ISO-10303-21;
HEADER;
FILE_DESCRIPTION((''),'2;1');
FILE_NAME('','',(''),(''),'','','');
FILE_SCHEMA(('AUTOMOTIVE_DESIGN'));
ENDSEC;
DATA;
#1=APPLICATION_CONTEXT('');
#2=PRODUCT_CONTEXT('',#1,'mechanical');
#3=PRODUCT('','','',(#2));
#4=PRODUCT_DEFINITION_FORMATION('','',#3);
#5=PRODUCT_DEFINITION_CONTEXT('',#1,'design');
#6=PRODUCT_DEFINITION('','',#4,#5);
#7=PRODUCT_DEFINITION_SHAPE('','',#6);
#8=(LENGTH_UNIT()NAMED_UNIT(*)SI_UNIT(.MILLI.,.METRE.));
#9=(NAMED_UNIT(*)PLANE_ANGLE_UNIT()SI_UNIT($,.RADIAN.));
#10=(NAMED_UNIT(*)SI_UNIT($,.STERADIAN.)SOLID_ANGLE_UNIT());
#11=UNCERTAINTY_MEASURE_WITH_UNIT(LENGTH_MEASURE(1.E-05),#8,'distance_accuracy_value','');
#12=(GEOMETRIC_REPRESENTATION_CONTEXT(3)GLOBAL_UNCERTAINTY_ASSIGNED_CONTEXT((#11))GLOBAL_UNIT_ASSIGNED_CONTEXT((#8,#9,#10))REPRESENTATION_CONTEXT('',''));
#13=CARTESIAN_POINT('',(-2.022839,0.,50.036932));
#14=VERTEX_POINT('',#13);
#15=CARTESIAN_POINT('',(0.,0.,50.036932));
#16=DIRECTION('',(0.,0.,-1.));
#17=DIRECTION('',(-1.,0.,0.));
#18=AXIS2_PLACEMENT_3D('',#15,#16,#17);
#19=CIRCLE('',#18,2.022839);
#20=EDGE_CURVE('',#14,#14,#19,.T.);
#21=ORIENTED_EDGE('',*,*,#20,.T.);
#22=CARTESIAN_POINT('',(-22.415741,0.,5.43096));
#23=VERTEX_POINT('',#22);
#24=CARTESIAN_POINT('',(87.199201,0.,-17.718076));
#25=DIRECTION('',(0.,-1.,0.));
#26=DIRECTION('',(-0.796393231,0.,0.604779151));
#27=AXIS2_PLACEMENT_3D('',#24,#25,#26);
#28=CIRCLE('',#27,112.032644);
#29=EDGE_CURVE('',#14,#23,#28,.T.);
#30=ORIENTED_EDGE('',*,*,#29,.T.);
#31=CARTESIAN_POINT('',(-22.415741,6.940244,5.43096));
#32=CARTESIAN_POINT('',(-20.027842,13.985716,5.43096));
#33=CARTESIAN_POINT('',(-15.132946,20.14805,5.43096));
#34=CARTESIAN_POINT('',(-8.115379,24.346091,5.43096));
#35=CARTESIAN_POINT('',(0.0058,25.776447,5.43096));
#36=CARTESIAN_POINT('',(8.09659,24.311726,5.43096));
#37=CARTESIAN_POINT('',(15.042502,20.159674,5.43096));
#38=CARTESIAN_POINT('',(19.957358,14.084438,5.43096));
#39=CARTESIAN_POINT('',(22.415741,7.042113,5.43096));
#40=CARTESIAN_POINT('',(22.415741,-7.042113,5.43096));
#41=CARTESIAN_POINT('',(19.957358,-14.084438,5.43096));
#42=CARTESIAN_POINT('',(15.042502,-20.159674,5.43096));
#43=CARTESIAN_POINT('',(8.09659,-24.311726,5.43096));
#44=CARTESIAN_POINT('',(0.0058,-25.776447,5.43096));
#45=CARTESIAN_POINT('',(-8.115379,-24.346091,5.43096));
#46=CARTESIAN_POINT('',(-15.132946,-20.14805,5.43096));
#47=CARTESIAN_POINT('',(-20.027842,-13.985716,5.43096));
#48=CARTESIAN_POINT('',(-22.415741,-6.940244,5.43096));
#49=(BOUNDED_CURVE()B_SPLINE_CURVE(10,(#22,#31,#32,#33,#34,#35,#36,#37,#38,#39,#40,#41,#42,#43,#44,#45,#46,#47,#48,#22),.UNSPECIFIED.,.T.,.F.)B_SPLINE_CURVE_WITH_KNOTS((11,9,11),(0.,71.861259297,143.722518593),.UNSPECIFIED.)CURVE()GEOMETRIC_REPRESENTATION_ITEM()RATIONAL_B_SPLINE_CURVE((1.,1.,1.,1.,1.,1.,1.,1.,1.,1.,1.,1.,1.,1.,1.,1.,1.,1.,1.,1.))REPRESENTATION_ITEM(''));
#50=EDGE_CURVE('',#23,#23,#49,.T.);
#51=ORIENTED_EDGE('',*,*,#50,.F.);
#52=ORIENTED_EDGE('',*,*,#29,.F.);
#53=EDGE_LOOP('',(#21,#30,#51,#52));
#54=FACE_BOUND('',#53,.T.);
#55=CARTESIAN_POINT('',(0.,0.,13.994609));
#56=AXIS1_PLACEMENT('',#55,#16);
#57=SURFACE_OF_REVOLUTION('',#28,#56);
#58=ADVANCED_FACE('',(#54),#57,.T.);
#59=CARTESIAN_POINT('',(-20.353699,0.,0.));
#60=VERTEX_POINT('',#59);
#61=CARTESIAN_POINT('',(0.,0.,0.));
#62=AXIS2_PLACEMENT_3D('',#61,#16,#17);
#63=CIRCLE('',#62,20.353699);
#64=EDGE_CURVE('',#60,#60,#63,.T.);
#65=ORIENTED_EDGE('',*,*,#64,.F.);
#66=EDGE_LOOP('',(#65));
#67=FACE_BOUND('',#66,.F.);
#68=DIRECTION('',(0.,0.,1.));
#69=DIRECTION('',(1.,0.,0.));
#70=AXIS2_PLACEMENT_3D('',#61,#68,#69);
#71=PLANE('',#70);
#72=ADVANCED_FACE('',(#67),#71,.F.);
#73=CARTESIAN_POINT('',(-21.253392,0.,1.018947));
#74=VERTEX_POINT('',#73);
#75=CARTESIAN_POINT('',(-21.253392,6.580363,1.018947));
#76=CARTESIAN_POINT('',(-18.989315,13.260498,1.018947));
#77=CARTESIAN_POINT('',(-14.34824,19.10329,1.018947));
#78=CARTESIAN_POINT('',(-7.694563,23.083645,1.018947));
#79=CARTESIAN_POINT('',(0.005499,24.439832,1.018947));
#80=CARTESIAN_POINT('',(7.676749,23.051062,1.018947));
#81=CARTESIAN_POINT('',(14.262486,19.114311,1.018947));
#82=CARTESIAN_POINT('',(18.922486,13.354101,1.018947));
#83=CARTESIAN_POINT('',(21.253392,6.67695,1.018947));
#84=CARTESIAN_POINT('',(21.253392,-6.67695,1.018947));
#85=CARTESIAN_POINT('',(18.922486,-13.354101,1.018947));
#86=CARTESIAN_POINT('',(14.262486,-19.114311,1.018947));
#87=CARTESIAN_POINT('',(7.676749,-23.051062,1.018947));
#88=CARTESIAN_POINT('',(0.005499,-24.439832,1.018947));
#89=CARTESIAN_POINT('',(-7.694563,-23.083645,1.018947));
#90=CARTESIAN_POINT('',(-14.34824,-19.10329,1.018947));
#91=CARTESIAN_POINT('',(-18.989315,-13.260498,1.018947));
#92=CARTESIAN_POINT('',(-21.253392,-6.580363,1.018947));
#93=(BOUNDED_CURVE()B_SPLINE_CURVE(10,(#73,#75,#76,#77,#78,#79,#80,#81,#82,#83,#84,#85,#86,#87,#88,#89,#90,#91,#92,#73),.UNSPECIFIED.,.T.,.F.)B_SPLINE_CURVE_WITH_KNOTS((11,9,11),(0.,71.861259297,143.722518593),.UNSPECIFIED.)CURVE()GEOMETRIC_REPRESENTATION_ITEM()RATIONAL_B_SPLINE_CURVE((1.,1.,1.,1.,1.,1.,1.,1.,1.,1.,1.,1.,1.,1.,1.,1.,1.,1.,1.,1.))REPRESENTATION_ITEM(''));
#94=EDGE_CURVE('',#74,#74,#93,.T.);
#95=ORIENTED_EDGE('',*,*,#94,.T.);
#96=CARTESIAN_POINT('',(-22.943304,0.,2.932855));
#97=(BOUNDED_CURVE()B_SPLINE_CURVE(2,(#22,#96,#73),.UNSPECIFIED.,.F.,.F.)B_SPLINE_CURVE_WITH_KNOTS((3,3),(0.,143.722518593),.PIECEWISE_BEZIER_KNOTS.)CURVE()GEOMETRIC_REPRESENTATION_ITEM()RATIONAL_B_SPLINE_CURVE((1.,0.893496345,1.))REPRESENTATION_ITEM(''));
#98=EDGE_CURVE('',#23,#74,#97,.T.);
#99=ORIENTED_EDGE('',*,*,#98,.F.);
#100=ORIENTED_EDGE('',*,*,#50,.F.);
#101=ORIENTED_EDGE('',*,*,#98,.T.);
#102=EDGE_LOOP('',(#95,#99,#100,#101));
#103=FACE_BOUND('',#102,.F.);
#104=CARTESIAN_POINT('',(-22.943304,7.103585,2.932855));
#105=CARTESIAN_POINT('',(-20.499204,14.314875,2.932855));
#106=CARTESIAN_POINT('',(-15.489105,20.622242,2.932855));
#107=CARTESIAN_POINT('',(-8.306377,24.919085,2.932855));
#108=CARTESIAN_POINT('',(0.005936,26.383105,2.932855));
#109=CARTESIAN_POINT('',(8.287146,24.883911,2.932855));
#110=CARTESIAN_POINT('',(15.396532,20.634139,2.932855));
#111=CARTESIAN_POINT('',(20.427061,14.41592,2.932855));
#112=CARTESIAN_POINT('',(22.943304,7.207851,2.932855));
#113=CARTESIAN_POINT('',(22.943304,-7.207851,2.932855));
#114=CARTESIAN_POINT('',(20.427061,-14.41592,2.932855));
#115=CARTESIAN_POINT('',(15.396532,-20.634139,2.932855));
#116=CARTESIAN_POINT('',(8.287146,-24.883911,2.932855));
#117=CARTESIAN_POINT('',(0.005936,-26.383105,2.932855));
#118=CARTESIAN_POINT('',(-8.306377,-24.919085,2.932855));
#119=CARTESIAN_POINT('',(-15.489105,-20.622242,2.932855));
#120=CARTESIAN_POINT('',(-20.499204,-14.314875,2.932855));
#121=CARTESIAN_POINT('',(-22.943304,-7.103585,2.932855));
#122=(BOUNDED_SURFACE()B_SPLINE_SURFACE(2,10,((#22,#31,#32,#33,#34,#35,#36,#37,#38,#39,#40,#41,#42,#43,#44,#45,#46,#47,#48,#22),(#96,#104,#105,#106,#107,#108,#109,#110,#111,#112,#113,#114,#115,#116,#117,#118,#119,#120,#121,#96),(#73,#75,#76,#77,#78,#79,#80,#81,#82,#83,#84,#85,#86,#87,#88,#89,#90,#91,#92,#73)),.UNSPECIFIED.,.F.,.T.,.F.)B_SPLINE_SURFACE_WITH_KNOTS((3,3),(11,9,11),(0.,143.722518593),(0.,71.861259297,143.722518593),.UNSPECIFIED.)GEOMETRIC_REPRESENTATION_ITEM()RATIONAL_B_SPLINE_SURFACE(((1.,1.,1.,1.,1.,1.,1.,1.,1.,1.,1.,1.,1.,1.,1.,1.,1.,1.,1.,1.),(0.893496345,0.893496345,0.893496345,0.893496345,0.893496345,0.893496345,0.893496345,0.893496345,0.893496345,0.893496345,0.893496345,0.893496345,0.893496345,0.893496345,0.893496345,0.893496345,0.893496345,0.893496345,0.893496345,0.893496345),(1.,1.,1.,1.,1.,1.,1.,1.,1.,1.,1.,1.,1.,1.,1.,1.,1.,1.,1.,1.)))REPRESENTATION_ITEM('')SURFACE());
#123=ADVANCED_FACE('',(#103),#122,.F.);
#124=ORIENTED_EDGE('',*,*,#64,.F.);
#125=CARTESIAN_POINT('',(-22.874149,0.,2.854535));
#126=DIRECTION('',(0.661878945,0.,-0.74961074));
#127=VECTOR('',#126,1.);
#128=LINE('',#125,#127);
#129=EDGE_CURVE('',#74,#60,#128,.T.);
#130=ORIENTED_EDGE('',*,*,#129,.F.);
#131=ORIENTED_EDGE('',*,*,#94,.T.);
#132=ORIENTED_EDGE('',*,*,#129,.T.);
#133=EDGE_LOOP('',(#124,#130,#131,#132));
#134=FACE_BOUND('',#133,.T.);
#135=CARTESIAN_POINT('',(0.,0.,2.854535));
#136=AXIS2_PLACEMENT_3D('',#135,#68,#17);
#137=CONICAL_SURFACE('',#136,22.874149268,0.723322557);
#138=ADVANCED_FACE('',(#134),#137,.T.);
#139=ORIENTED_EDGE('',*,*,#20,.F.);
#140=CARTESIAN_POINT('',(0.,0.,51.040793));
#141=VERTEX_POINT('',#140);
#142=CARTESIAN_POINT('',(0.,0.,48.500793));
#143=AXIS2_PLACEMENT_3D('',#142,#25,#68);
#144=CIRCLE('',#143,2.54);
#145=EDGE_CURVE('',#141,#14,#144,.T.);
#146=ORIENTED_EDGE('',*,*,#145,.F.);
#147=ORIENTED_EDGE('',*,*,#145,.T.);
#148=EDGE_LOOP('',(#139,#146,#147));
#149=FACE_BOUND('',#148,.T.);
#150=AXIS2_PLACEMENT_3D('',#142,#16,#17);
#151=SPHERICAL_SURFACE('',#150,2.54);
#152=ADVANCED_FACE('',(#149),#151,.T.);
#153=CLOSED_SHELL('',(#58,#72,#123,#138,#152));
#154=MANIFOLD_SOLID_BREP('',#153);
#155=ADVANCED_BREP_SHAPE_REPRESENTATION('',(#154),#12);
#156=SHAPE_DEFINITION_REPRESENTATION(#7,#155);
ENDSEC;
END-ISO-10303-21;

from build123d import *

# Parameters (mm, degrees)
F2_R     = 36.1372646231
F3_DEPTH = 25.4
F5_R     = 5.08


# Not quite as in the source:
# - a fillet or chamfer that OpenCascade refuses, or shapes differently, is made with other operations: its cross-section is extruded or revolved along the edge and cut away or added


with BuildPart() as f1:
    # F0 (on Front) → F1 (revolve)
    with BuildSketch(Plane.XZ):
        with BuildLine():
            ThreePointArc((-2.0228388078, 50.0369316611), (-14.8680259182, 28.4727741092), (-22.5899603778, 4.5900721886))
            ThreePointArc((-22.5899603778, 4.5900721886), (-17.8491381046, -14.5870950326), (0, -23.0515741884))
            Line((0, -23.0515741884), (0, 51.0407926186))
            ThreePointArc((0, 51.0407926186), (-1.1291162102, 50.7760281194), (-2.0228388078, 50.0369316611))
        make_face()
    revolve(axis=Axis((0, 0, 13.9946092151), (0, 0, -1)))

    # F2 (on Top) → F3 (cut)
    with BuildSketch(Plane.XY):
        Circle(F2_R)
    extrude(amount=-F3_DEPTH, mode=Mode.SUBTRACT)

    # F4: chamfer of 2.54 on 1 edges, made by hand

    # F4_s1 → F4_t2 (revolve, cut)
    with BuildSketch(Plane.XZ):
        with BuildLine():
            Line((-22.8741492677, 2.8545346106), (-20.3536993121, 0))
            Line((-20.3536993121, 0), (-23.0515741884, 0))
            ThreePointArc((-23.0515741884, 0), (-23.0049180414, 1.4658848771), (-22.8741492677, 2.8545346106))
        make_face()
    revolve(axis=Axis((0, 0, 0), (0, 0, -1)), mode=Mode.SUBTRACT)

    # F5
    f5_edges = [f1.edges().sort_by_distance(p)[0] for p in [
        (22.874149, 0, 2.854535),
    ]]
    fillet(f5_edges, radius=F5_R)


solid = f1.part
